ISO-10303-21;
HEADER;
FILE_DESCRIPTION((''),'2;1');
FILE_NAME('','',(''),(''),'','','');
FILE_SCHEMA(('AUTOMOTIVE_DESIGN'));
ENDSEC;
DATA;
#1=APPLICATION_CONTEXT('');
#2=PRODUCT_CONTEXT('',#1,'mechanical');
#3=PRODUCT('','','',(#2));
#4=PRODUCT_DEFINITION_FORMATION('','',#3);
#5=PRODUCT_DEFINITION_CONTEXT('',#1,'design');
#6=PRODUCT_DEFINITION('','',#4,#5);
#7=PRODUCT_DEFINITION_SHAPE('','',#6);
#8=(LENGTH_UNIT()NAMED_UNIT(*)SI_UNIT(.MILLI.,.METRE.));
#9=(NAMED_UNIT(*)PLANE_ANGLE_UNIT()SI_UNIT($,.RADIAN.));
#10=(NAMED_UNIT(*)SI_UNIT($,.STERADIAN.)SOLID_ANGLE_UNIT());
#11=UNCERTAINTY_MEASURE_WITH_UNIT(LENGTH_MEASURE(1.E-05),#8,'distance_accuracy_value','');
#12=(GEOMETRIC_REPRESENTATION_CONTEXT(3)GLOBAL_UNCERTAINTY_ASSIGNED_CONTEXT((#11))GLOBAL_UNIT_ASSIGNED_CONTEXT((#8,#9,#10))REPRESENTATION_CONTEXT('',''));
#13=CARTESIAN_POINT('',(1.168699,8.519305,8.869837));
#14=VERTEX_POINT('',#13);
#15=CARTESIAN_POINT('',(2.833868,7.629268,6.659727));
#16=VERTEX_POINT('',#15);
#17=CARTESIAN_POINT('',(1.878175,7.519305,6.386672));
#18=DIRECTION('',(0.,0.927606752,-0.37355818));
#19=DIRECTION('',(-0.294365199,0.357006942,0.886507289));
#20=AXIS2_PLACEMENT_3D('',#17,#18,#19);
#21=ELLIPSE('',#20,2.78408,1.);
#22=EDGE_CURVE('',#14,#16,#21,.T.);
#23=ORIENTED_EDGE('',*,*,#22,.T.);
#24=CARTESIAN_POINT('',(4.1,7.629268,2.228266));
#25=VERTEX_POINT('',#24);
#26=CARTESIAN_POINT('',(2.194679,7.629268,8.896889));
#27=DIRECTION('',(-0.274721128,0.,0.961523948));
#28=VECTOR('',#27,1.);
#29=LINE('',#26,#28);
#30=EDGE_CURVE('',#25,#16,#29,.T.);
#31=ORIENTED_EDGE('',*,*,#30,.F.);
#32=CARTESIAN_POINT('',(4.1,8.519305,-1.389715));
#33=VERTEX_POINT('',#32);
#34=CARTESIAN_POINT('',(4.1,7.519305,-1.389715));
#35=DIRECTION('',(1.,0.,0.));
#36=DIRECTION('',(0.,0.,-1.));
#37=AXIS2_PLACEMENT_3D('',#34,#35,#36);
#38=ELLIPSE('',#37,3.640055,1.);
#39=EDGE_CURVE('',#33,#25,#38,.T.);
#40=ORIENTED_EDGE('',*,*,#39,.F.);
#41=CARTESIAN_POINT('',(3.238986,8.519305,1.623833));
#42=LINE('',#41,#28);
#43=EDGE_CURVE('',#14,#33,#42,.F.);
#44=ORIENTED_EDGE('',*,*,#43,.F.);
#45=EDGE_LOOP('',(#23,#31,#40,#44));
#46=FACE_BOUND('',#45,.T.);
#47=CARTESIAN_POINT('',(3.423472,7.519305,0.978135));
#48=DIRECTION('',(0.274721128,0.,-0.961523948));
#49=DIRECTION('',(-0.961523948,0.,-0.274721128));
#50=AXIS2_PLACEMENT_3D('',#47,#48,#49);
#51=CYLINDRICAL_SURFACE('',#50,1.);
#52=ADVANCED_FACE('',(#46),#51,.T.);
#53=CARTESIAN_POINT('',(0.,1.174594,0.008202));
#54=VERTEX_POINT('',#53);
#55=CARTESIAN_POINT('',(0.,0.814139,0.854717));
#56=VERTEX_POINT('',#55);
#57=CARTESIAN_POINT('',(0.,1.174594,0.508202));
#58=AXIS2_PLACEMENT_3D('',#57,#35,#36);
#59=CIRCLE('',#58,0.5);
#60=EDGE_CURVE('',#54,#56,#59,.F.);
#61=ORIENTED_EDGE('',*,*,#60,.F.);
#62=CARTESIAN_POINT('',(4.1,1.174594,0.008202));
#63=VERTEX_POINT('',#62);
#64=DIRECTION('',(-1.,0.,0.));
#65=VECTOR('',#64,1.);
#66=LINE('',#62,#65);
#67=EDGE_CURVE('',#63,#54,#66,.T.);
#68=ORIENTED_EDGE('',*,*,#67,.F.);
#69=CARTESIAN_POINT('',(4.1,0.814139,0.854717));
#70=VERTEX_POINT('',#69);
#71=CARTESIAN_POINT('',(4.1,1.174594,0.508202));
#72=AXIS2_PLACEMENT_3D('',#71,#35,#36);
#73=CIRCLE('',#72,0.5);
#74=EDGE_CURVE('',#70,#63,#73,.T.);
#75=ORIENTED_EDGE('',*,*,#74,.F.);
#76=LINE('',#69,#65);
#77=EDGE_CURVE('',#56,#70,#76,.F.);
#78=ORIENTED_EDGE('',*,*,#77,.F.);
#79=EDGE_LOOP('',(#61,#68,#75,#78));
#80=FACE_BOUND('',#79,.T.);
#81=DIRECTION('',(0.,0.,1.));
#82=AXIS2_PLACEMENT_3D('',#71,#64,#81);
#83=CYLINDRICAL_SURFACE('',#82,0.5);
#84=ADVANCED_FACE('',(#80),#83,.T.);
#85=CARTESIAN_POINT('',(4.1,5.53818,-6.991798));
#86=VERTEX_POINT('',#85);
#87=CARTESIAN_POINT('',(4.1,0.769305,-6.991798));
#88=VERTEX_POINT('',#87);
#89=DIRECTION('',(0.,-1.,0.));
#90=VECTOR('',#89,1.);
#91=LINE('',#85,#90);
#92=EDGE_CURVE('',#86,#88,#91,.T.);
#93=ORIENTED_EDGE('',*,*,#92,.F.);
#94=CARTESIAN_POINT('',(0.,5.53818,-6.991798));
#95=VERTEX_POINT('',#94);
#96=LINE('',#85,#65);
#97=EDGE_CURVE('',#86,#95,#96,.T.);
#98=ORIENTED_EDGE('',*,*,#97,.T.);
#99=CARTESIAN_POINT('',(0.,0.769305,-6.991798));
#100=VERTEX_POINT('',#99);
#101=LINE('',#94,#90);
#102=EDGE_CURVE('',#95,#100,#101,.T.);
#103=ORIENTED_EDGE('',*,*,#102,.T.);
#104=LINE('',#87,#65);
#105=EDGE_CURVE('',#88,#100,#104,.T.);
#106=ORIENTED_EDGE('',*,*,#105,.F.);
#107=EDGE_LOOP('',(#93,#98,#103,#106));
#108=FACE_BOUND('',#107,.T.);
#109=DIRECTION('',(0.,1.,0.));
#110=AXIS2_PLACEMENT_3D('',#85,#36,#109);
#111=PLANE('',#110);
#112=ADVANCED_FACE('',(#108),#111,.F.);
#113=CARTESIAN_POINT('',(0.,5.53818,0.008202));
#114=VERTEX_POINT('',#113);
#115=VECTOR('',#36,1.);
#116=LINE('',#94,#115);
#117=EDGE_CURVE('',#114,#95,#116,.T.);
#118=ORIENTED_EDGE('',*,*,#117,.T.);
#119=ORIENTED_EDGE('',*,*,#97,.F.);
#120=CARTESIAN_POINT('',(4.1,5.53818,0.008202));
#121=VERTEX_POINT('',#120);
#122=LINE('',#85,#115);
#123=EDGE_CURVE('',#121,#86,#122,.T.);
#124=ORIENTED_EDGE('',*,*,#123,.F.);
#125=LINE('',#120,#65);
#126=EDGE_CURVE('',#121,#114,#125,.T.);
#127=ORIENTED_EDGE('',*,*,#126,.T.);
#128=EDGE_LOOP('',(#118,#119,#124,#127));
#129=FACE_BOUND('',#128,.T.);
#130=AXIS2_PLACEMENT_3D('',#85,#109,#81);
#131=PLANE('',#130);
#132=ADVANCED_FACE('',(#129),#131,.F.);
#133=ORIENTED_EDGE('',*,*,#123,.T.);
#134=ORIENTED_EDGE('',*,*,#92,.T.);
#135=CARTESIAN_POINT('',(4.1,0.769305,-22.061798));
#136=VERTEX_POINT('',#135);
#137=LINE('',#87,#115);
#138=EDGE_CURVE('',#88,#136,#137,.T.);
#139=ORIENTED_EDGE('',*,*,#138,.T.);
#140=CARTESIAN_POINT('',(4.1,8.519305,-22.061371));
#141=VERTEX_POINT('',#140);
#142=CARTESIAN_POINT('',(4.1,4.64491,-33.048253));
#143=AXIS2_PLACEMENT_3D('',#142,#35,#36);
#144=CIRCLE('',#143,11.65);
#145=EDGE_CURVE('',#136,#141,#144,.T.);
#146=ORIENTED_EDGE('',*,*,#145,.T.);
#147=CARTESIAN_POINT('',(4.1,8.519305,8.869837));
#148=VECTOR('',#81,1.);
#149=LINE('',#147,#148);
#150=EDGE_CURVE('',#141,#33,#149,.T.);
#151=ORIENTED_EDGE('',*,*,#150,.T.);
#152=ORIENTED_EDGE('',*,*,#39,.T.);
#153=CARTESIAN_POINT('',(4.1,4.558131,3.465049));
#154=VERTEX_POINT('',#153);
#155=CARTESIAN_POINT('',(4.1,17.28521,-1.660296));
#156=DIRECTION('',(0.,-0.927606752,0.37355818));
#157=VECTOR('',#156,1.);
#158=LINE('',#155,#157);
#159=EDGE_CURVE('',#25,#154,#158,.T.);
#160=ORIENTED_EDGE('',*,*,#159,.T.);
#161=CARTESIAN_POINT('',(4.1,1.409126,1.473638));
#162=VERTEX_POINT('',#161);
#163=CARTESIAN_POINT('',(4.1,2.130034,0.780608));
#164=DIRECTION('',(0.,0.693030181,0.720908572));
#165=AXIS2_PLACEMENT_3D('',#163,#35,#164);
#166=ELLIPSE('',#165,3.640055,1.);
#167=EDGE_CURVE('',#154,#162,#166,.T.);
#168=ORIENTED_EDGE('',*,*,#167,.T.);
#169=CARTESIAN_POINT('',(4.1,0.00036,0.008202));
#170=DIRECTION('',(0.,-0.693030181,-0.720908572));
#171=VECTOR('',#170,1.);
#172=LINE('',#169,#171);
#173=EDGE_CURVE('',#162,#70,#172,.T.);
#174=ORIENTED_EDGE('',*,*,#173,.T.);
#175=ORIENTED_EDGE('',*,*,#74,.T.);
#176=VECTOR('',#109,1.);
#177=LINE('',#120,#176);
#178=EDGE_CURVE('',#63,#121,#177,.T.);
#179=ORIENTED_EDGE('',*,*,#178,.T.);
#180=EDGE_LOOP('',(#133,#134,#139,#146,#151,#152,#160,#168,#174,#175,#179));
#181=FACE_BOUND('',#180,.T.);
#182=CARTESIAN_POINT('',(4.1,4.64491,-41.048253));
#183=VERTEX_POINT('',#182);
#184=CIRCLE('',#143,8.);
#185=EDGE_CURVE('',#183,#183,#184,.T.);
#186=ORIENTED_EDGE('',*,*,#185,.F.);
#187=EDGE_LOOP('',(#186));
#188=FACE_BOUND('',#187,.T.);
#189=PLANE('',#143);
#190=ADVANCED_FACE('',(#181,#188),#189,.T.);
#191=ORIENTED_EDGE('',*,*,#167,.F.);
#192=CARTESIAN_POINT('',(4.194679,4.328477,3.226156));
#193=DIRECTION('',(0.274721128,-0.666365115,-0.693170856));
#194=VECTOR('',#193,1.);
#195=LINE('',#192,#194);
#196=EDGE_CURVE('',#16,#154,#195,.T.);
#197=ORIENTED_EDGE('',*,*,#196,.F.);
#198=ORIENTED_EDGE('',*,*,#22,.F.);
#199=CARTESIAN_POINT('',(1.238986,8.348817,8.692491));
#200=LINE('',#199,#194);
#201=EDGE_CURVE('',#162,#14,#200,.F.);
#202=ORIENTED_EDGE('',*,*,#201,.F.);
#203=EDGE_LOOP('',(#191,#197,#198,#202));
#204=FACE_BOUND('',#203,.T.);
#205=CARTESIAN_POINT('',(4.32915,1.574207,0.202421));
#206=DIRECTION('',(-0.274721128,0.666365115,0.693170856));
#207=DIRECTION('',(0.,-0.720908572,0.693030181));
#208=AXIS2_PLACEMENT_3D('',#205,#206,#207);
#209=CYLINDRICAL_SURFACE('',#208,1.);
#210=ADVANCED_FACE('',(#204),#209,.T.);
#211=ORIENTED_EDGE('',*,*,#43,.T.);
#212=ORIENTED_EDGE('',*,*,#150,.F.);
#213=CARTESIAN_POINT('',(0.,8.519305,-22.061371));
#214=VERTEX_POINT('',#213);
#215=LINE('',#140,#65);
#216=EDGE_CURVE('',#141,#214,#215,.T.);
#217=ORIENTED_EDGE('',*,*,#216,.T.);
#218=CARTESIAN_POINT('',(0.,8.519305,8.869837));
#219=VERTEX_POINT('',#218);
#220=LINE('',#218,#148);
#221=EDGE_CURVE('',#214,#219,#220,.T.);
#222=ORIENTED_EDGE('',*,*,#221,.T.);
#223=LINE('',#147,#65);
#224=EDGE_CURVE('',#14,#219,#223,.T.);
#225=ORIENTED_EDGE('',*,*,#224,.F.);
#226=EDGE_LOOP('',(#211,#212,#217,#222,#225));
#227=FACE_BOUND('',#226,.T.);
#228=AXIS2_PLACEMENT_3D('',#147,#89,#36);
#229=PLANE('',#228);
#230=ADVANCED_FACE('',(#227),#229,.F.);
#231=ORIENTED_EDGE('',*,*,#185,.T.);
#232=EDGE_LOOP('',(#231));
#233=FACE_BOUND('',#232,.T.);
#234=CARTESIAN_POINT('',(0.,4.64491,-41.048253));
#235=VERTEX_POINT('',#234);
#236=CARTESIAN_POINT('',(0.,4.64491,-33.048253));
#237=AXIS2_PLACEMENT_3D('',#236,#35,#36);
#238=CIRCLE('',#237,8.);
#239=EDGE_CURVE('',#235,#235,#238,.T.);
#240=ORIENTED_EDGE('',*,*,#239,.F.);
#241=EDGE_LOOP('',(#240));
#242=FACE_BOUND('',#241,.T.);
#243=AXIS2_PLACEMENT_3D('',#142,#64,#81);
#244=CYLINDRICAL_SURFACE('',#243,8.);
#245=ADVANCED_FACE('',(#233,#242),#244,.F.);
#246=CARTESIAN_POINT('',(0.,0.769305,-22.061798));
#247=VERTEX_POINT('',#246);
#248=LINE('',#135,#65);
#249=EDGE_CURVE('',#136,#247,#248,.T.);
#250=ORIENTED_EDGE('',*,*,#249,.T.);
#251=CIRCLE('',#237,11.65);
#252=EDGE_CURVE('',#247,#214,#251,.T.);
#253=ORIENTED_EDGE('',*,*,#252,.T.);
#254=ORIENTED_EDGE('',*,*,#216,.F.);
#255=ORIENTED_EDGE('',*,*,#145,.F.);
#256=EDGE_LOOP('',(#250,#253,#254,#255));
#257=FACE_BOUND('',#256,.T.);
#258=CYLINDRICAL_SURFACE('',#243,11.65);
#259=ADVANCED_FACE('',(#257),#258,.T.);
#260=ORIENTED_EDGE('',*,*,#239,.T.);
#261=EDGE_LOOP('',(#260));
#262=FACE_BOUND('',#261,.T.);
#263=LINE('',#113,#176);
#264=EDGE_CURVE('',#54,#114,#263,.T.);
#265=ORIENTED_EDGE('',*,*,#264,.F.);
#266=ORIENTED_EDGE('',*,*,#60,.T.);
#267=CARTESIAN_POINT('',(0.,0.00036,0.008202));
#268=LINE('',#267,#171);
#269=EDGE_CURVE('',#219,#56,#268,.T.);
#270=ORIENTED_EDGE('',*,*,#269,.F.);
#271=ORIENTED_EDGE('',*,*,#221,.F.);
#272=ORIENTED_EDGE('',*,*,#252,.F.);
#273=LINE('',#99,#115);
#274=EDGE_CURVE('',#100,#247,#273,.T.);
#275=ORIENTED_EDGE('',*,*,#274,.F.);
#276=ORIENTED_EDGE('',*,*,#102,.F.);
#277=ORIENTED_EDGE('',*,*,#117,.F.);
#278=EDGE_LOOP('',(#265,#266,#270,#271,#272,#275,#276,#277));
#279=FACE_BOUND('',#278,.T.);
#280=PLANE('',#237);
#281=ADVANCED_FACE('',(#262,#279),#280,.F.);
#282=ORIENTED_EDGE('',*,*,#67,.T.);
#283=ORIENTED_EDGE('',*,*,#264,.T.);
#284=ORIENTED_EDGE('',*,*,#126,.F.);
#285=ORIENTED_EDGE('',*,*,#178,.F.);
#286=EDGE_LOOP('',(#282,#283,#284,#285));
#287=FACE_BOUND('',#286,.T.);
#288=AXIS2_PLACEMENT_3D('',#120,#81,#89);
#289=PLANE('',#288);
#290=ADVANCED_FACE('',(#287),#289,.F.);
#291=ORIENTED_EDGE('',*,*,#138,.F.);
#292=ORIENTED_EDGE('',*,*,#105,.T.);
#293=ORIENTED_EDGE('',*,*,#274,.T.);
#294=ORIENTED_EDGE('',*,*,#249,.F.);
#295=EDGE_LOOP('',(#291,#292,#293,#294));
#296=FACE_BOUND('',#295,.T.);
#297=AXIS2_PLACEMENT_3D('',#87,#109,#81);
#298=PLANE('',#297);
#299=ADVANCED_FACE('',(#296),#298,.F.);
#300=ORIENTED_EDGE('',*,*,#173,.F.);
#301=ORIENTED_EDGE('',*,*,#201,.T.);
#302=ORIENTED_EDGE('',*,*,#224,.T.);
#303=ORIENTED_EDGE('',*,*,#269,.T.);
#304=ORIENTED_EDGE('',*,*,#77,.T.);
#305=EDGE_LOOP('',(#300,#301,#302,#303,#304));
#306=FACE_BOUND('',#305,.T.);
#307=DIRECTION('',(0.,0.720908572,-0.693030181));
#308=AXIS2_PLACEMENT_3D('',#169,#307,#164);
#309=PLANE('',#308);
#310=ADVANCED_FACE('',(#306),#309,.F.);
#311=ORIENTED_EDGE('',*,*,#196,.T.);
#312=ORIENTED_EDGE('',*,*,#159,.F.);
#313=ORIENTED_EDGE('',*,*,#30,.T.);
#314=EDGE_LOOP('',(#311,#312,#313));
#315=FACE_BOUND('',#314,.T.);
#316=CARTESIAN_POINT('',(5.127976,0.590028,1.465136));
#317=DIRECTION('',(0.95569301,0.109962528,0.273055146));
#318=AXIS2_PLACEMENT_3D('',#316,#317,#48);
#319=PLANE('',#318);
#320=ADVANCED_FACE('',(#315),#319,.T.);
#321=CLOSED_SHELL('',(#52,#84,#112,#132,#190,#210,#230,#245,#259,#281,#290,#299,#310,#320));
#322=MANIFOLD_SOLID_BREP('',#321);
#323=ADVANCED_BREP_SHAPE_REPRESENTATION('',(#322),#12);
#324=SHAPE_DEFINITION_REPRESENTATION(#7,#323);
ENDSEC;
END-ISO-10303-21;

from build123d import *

# Parameters (mm, degrees)
SKETCH1_R           = 8
BOSS_EXTRUDE1_DEPTH = 4.1
FILLET1_R           = 0.5
CHAMFER1_START      = 5.365714371
CHAMFER1_OUTLINE_W  = 7
CHAMFER1_OUTLINE_H  = 10
CHAMFER1_DEPTH      = 2.634285629
FILLET2_R           = 1


with BuildPart() as part:
    # Sketch1 → Boss-Extrude1 (new body)
    with BuildSketch(Plane(origin=(0, 0, 0), x_dir=(0, 0, -1), z_dir=(1, 0, 0))):
        with BuildLine():
            Line((-0.008202263, 0.000360071), (-8.869837301, 8.519305154))
            Line((-8.869837301, 8.519305154), (22.061371293, 8.519305154))
            ThreePointArc((22.061371293, 8.519305154), (44.698252536, 4.645550739), (22.061797737, 0.769305154))
            Line((22.061797737, 0.769305154), (6.991797737, 0.769305154))
            Line((6.991797737, 0.769305154), (6.991797737, 5.53817988))
            Line((6.991797737, 5.53817988), (-0.008202263, 5.53817988))
            Line((-0.008202263, 5.53817988), (-0.008202263, 0.000360071))
        make_face()
        with Locations((33.048252553, 4.644909697)):
            Circle(SKETCH1_R, mode=Mode.SUBTRACT)
    extrude(amount=BOSS_EXTRUDE1_DEPTH)

    # Fillet1
    fillet1_edges = [part.edges().sort_by_distance(p)[0] for p in [
        (2.05, 0.000360071, 0.008202263),
    ]]
    fillet(fillet1_edges, radius=FILLET1_R)

    # Chamfer1: read off the stored shape, not the designer's step
    # Chamfer1 outline → Chamfer1 (cut)
    with BuildSketch(Plane(origin=(0, 0, 0), x_dir=(-0.10573160402996473, 0.993935733552454, -0.03020902972284707), z_dir=(0.955693010226633, 0.10996252801543402, 0.273055145779038)).offset(CHAMFER1_START)):
        with Locations((5.5, 4)):
            Rectangle(CHAMFER1_OUTLINE_W, CHAMFER1_OUTLINE_H)
    extrude(amount=CHAMFER1_DEPTH, mode=Mode.SUBTRACT)

    # Fillet2
    fillet2_edges = [part.edges().sort_by_distance(p)[0] for p in [
        (3.1, 8.519305154, 5.369837302),
        (3.1, 6.093699523, 6.346657301),
    ]]
    fillet(fillet2_edges, radius=FILLET2_R)


solid = part.part
